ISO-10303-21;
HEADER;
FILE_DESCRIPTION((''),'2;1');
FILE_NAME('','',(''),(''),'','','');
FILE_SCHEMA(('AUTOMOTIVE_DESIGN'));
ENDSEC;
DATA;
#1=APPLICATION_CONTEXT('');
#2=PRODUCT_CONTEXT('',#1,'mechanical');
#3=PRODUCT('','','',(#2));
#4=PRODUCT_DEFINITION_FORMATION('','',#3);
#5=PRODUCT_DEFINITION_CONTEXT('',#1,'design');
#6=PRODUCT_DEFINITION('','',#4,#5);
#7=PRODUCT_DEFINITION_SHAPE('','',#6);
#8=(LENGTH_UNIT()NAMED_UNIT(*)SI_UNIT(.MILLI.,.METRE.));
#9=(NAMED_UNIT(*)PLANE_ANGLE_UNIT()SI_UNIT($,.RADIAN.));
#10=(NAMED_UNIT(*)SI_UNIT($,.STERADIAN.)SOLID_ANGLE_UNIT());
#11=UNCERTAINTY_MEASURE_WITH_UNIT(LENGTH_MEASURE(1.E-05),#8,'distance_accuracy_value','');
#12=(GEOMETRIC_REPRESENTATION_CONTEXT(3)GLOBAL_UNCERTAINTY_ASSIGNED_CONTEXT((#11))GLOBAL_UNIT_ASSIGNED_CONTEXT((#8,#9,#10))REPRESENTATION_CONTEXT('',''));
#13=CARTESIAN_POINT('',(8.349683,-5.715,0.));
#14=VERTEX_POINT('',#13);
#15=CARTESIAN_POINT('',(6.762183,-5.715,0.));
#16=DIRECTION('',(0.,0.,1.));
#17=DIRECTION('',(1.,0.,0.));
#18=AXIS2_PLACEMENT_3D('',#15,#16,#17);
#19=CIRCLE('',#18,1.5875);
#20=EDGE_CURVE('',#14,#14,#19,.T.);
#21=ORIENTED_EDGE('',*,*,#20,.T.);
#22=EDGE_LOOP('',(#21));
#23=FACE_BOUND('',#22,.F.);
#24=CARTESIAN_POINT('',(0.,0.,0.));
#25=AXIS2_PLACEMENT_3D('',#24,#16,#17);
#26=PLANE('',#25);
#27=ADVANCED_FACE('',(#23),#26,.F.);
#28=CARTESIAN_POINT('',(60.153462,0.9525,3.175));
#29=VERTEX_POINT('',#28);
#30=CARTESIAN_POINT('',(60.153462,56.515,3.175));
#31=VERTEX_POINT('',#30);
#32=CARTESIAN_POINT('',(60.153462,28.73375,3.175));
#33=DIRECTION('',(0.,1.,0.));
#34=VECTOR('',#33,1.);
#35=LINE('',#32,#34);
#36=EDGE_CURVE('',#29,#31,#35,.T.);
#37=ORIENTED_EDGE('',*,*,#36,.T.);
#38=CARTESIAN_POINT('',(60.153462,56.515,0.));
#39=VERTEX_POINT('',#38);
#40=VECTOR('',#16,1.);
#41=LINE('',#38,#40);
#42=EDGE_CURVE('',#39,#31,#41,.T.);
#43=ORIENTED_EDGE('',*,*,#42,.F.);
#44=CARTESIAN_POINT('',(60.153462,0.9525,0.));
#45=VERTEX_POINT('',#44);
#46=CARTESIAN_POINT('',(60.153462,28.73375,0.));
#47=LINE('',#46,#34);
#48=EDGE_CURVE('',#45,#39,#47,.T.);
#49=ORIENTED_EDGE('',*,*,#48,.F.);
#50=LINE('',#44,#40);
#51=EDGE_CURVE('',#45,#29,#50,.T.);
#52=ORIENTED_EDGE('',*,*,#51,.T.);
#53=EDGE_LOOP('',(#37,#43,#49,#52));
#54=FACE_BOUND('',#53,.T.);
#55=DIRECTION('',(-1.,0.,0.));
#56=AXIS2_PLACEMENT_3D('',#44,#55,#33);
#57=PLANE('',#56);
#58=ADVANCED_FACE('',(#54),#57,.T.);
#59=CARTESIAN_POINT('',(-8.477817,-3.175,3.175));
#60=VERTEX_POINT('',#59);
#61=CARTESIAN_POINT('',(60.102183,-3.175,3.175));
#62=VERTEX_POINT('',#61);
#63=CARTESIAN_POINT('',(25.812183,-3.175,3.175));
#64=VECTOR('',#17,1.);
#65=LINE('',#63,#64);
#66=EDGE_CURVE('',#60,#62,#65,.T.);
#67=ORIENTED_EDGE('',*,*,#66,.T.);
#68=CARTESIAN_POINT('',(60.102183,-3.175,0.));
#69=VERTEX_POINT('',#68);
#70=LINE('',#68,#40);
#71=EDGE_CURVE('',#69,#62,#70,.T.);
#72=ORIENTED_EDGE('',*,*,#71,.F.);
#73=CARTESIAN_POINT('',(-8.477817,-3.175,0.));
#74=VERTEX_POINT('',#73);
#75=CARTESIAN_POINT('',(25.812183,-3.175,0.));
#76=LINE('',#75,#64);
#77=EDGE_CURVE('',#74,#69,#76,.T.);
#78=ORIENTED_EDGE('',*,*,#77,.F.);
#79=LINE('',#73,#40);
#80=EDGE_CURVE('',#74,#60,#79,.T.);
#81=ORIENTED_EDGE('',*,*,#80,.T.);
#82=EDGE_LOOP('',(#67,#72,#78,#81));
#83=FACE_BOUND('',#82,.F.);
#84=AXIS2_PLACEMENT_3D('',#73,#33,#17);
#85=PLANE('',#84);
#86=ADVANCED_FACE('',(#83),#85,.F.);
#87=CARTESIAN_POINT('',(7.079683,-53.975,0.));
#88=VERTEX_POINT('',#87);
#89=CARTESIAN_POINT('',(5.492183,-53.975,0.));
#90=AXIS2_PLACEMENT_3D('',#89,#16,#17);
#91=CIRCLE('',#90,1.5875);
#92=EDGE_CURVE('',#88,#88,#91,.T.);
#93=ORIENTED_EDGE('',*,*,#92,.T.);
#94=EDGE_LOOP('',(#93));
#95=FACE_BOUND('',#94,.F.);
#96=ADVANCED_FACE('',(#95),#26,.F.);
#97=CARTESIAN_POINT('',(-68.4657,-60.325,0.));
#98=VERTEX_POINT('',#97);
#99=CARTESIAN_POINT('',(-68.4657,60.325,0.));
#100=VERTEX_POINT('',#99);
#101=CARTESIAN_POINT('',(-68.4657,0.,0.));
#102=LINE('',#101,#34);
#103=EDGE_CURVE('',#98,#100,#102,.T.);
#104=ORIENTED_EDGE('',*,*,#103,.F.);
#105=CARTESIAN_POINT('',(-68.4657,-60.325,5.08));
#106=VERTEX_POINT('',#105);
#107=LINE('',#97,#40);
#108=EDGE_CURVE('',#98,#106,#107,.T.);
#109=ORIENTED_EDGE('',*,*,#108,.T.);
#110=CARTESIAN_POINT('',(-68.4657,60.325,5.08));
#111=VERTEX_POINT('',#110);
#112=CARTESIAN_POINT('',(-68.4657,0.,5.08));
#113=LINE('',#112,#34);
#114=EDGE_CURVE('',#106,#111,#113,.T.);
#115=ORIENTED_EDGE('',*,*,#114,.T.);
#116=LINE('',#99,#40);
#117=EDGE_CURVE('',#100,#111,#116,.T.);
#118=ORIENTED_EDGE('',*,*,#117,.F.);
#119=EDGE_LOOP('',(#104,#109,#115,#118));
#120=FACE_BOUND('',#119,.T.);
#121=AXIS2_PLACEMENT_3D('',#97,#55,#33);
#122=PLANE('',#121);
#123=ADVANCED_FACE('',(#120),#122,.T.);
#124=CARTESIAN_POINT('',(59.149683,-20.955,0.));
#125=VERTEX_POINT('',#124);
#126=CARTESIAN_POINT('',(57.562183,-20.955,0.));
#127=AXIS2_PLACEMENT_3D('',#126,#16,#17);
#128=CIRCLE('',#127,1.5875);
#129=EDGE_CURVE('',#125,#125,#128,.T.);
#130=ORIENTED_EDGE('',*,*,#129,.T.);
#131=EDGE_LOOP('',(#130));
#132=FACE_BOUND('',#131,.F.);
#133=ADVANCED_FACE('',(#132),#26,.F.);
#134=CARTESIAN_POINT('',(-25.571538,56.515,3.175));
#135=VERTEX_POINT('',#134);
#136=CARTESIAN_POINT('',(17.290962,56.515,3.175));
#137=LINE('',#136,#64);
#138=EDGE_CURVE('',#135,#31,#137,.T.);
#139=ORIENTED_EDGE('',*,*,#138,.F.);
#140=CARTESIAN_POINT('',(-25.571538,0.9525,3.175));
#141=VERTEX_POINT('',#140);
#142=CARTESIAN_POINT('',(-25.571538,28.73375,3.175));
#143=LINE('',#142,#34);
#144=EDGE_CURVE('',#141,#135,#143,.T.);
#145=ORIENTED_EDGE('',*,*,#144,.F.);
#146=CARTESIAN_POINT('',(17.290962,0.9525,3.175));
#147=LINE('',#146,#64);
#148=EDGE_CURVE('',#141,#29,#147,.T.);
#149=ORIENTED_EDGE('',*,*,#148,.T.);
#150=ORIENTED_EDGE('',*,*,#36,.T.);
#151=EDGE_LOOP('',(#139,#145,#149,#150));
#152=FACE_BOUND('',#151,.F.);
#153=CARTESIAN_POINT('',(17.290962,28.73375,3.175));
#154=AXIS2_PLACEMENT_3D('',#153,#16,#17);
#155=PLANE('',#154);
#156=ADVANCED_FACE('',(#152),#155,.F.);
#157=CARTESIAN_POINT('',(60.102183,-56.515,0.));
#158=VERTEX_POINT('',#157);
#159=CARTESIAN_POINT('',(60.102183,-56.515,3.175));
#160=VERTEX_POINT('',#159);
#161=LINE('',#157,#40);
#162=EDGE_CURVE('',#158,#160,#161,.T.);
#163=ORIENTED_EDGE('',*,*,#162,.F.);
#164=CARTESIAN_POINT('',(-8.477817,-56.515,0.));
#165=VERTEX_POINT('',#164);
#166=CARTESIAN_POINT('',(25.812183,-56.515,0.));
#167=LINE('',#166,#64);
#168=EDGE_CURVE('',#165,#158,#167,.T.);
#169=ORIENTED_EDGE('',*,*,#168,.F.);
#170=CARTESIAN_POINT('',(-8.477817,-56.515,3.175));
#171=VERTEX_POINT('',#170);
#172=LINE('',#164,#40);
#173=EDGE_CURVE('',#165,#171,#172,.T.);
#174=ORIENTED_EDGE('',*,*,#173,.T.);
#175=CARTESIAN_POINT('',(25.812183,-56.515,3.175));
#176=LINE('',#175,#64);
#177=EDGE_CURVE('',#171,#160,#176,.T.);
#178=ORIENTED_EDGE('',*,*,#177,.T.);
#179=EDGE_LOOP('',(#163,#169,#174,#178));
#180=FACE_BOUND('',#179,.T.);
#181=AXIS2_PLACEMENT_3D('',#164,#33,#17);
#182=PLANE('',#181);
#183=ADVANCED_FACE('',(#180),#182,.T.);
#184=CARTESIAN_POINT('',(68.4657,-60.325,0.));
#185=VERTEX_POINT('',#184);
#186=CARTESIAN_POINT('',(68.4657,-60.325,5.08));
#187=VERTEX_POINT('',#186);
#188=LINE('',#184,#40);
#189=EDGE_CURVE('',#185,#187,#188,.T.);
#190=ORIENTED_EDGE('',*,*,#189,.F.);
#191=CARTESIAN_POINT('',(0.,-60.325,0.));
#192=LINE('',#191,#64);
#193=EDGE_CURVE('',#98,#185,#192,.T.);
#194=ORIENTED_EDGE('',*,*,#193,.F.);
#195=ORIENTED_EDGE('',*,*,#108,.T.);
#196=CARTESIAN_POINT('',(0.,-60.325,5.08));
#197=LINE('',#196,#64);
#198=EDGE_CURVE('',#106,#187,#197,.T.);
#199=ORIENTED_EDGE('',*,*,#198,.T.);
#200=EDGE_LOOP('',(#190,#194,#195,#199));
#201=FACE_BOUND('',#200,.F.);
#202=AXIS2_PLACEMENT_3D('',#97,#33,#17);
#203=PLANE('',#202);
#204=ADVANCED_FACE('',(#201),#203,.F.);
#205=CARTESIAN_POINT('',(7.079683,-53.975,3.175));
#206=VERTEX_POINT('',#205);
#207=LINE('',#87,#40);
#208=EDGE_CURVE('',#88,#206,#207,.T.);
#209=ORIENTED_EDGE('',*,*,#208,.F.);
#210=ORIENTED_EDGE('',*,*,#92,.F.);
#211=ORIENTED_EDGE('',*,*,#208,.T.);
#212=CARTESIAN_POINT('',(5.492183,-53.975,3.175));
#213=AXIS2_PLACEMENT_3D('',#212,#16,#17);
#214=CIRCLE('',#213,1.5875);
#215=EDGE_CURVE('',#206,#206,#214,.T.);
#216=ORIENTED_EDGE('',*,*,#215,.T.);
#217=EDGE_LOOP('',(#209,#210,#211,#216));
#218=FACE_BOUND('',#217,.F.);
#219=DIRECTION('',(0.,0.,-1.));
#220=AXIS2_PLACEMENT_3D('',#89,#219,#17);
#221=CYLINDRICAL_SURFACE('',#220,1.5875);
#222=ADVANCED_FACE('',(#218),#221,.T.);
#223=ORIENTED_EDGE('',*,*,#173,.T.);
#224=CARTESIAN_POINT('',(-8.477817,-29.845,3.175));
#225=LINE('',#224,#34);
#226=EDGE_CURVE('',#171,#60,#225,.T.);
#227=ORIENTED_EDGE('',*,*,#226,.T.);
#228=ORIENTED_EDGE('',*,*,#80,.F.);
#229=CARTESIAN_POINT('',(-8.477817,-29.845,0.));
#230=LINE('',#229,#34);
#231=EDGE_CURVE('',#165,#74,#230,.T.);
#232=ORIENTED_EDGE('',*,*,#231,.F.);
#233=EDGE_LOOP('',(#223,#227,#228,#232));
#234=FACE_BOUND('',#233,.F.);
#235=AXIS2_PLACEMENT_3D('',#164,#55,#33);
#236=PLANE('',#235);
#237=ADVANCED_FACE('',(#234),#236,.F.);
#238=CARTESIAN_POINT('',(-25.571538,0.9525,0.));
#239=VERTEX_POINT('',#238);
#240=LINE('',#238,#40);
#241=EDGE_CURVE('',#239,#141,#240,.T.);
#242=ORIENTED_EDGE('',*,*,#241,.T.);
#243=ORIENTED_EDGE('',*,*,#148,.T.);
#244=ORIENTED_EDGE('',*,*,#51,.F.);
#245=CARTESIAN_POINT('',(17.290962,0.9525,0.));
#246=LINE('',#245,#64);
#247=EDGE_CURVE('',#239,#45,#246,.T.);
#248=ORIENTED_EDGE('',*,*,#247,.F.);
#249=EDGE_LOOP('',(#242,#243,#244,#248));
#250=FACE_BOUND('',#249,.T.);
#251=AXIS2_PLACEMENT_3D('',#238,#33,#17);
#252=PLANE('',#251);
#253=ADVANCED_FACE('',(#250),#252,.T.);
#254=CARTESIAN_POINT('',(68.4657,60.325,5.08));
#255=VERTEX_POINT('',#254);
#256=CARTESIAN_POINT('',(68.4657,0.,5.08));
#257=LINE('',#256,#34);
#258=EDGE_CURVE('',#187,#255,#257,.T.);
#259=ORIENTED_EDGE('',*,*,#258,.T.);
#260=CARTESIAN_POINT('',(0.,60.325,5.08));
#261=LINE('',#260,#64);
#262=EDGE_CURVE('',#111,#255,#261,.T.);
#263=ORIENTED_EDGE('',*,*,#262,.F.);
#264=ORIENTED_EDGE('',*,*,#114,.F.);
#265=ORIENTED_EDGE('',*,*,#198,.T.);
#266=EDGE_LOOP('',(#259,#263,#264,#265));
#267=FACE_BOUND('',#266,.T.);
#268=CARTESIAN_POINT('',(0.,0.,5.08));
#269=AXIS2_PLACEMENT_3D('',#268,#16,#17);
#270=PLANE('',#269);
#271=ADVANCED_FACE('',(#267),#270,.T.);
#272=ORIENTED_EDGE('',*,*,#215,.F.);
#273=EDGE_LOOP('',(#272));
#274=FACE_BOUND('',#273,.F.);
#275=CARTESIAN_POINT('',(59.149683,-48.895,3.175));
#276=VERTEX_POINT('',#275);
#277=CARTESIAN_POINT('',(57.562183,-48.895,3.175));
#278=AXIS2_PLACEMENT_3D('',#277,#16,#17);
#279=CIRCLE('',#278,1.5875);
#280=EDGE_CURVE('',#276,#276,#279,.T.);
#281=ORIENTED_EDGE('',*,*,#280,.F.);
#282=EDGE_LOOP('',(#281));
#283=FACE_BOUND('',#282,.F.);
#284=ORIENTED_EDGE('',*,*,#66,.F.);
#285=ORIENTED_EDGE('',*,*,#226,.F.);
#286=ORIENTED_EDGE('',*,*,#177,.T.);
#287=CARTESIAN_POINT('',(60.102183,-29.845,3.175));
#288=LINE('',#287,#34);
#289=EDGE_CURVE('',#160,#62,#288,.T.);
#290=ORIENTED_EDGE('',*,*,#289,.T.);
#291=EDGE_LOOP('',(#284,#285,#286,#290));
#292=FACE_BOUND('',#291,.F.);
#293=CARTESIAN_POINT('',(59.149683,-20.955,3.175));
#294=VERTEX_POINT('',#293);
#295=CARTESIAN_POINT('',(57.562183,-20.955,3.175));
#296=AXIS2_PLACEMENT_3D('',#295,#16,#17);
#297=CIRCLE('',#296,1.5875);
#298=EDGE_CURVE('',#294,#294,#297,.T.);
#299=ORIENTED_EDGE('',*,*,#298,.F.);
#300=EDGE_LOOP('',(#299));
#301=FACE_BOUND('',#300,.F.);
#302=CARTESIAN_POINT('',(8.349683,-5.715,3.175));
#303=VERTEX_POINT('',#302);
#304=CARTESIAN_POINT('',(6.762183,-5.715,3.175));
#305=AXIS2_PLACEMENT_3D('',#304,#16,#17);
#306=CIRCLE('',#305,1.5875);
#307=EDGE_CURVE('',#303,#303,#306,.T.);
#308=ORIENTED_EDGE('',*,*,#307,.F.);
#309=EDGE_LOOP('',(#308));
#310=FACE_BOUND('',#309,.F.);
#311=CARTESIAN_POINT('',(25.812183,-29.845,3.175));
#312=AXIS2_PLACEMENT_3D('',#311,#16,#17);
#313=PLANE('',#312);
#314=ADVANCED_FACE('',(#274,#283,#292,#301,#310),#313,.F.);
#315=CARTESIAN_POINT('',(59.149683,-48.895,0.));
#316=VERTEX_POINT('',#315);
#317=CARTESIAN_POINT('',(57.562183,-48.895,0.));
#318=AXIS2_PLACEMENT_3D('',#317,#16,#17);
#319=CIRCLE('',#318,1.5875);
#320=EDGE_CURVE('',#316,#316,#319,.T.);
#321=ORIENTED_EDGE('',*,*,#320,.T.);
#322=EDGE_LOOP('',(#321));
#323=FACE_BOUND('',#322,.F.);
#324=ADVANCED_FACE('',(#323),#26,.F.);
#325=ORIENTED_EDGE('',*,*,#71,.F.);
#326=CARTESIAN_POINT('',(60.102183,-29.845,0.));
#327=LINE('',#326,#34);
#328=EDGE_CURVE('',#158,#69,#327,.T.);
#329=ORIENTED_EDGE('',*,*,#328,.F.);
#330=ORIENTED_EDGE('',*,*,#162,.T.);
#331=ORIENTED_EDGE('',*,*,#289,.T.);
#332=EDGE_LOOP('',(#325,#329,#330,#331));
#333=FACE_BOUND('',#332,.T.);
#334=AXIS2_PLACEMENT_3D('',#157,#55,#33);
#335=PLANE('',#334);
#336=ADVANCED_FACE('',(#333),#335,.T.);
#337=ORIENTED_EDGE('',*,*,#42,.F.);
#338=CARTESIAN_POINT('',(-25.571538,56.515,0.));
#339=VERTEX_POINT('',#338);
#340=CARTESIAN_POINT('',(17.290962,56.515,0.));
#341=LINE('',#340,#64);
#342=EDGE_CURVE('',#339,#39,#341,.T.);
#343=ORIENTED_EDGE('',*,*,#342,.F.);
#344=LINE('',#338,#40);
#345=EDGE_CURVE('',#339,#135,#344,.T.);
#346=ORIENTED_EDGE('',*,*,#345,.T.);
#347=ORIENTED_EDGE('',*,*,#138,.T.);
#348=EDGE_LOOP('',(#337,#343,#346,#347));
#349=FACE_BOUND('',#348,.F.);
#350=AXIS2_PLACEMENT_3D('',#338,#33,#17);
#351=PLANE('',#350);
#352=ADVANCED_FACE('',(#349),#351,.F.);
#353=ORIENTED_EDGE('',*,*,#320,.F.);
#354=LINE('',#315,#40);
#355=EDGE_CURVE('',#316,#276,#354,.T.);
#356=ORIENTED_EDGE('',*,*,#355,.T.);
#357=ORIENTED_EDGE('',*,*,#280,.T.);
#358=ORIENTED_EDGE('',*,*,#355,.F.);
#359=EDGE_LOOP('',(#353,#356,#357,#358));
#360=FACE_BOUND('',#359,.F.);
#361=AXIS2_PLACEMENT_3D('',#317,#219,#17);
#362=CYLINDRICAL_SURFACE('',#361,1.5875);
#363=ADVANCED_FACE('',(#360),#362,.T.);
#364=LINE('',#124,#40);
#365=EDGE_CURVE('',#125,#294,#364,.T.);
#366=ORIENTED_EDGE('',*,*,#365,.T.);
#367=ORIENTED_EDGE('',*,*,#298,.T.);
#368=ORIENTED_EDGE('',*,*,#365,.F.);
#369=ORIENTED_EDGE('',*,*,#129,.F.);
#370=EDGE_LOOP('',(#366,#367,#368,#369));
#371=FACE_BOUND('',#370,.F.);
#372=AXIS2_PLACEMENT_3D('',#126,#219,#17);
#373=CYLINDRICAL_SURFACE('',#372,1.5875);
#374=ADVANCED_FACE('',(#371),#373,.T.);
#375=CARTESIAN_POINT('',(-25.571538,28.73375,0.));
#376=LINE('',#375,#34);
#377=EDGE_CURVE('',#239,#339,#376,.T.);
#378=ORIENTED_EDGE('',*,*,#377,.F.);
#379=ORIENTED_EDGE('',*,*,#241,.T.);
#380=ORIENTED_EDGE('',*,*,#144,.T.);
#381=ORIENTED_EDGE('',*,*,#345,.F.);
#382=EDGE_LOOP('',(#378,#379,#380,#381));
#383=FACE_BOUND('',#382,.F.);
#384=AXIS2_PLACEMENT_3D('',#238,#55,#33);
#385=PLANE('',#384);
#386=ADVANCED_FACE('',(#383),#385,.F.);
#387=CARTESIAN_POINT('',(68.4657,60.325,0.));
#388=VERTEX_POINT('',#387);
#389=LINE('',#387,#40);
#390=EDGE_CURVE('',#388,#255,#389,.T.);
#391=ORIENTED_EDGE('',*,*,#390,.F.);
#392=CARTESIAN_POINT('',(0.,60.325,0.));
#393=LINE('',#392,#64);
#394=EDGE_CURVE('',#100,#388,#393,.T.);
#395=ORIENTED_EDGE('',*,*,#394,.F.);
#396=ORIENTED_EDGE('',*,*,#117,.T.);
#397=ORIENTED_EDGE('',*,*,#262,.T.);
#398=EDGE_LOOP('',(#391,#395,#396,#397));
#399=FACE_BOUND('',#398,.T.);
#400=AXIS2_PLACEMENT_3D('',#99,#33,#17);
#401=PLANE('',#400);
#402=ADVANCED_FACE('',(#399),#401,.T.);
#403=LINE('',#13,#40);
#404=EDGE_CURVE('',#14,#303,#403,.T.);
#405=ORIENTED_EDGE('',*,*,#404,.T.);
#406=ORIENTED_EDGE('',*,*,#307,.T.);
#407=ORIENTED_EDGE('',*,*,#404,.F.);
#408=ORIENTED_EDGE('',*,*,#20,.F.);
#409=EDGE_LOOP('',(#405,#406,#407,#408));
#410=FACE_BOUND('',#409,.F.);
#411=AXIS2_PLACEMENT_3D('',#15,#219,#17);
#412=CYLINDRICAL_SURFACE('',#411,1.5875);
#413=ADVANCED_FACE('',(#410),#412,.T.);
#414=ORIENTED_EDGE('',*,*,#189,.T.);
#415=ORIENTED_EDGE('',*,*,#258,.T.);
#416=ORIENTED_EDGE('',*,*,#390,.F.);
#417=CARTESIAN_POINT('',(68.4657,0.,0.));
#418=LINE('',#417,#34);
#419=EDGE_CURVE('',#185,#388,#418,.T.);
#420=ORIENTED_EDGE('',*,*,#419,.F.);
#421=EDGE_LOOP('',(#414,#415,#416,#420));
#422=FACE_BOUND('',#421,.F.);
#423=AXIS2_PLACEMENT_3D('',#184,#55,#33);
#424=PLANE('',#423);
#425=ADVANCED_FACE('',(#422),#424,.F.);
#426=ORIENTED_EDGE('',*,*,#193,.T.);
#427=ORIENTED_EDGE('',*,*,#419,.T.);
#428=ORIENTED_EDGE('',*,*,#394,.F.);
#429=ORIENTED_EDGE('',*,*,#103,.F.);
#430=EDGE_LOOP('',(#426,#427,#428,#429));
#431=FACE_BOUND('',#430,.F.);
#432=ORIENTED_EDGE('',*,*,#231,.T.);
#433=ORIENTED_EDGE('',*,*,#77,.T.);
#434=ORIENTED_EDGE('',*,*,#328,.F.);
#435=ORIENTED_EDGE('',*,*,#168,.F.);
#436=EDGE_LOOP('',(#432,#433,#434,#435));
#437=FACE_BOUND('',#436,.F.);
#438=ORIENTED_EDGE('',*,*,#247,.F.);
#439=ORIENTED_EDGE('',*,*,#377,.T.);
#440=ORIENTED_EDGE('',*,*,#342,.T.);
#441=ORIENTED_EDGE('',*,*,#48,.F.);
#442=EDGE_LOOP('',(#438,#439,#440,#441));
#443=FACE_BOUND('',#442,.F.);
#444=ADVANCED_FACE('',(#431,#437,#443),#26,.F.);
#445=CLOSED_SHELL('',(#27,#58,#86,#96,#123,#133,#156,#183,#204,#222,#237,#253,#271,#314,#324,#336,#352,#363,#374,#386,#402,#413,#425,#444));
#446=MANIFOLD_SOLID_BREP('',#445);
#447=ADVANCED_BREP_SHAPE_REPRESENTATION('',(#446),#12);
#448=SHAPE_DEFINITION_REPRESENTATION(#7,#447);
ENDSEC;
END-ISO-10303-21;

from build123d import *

# Parameters (mm, degrees)
F0_W     = 136.9314
F0_H     = 120.65
F2_DEPTH = 5.08
F1_W     = 85.725
F1_H     = 55.5625
F1_W_2   = 68.58
F1_H_2   = 53.34
F1_R     = 1.5875
F3_DEPTH = 3.175


# Not quite as in the source:
# - the program builds the solid bodies; features that only make, move or delete a surface that nothing else refers to are left out


with BuildPart() as f2:
    # F0 (on Top) → F2 (new body)
    with BuildSketch(Plane.XY):
        Rectangle(F0_W, F0_H)
    extrude(amount=F2_DEPTH)

    # F1 (on Top) → F3 (cut)
    with BuildSketch(Plane.XY):
        with Locations((17.2909619287, 28.73375)):
            Rectangle(F1_W, F1_H)
        with Locations((25.8121827105, -29.845)):
            Rectangle(F1_W_2, F1_H_2)
        with Locations((5.4921827105, -53.975)):
            Circle(F1_R, mode=Mode.SUBTRACT)
        with Locations((6.7621827105, -5.715)):
            Circle(F1_R, mode=Mode.SUBTRACT)
        with Locations((57.5621827105, -48.895)):
            Circle(F1_R, mode=Mode.SUBTRACT)
        with Locations((57.5621827105, -20.955)):
            Circle(F1_R, mode=Mode.SUBTRACT)
    extrude(amount=F3_DEPTH, mode=Mode.SUBTRACT)


solid = f2.part
